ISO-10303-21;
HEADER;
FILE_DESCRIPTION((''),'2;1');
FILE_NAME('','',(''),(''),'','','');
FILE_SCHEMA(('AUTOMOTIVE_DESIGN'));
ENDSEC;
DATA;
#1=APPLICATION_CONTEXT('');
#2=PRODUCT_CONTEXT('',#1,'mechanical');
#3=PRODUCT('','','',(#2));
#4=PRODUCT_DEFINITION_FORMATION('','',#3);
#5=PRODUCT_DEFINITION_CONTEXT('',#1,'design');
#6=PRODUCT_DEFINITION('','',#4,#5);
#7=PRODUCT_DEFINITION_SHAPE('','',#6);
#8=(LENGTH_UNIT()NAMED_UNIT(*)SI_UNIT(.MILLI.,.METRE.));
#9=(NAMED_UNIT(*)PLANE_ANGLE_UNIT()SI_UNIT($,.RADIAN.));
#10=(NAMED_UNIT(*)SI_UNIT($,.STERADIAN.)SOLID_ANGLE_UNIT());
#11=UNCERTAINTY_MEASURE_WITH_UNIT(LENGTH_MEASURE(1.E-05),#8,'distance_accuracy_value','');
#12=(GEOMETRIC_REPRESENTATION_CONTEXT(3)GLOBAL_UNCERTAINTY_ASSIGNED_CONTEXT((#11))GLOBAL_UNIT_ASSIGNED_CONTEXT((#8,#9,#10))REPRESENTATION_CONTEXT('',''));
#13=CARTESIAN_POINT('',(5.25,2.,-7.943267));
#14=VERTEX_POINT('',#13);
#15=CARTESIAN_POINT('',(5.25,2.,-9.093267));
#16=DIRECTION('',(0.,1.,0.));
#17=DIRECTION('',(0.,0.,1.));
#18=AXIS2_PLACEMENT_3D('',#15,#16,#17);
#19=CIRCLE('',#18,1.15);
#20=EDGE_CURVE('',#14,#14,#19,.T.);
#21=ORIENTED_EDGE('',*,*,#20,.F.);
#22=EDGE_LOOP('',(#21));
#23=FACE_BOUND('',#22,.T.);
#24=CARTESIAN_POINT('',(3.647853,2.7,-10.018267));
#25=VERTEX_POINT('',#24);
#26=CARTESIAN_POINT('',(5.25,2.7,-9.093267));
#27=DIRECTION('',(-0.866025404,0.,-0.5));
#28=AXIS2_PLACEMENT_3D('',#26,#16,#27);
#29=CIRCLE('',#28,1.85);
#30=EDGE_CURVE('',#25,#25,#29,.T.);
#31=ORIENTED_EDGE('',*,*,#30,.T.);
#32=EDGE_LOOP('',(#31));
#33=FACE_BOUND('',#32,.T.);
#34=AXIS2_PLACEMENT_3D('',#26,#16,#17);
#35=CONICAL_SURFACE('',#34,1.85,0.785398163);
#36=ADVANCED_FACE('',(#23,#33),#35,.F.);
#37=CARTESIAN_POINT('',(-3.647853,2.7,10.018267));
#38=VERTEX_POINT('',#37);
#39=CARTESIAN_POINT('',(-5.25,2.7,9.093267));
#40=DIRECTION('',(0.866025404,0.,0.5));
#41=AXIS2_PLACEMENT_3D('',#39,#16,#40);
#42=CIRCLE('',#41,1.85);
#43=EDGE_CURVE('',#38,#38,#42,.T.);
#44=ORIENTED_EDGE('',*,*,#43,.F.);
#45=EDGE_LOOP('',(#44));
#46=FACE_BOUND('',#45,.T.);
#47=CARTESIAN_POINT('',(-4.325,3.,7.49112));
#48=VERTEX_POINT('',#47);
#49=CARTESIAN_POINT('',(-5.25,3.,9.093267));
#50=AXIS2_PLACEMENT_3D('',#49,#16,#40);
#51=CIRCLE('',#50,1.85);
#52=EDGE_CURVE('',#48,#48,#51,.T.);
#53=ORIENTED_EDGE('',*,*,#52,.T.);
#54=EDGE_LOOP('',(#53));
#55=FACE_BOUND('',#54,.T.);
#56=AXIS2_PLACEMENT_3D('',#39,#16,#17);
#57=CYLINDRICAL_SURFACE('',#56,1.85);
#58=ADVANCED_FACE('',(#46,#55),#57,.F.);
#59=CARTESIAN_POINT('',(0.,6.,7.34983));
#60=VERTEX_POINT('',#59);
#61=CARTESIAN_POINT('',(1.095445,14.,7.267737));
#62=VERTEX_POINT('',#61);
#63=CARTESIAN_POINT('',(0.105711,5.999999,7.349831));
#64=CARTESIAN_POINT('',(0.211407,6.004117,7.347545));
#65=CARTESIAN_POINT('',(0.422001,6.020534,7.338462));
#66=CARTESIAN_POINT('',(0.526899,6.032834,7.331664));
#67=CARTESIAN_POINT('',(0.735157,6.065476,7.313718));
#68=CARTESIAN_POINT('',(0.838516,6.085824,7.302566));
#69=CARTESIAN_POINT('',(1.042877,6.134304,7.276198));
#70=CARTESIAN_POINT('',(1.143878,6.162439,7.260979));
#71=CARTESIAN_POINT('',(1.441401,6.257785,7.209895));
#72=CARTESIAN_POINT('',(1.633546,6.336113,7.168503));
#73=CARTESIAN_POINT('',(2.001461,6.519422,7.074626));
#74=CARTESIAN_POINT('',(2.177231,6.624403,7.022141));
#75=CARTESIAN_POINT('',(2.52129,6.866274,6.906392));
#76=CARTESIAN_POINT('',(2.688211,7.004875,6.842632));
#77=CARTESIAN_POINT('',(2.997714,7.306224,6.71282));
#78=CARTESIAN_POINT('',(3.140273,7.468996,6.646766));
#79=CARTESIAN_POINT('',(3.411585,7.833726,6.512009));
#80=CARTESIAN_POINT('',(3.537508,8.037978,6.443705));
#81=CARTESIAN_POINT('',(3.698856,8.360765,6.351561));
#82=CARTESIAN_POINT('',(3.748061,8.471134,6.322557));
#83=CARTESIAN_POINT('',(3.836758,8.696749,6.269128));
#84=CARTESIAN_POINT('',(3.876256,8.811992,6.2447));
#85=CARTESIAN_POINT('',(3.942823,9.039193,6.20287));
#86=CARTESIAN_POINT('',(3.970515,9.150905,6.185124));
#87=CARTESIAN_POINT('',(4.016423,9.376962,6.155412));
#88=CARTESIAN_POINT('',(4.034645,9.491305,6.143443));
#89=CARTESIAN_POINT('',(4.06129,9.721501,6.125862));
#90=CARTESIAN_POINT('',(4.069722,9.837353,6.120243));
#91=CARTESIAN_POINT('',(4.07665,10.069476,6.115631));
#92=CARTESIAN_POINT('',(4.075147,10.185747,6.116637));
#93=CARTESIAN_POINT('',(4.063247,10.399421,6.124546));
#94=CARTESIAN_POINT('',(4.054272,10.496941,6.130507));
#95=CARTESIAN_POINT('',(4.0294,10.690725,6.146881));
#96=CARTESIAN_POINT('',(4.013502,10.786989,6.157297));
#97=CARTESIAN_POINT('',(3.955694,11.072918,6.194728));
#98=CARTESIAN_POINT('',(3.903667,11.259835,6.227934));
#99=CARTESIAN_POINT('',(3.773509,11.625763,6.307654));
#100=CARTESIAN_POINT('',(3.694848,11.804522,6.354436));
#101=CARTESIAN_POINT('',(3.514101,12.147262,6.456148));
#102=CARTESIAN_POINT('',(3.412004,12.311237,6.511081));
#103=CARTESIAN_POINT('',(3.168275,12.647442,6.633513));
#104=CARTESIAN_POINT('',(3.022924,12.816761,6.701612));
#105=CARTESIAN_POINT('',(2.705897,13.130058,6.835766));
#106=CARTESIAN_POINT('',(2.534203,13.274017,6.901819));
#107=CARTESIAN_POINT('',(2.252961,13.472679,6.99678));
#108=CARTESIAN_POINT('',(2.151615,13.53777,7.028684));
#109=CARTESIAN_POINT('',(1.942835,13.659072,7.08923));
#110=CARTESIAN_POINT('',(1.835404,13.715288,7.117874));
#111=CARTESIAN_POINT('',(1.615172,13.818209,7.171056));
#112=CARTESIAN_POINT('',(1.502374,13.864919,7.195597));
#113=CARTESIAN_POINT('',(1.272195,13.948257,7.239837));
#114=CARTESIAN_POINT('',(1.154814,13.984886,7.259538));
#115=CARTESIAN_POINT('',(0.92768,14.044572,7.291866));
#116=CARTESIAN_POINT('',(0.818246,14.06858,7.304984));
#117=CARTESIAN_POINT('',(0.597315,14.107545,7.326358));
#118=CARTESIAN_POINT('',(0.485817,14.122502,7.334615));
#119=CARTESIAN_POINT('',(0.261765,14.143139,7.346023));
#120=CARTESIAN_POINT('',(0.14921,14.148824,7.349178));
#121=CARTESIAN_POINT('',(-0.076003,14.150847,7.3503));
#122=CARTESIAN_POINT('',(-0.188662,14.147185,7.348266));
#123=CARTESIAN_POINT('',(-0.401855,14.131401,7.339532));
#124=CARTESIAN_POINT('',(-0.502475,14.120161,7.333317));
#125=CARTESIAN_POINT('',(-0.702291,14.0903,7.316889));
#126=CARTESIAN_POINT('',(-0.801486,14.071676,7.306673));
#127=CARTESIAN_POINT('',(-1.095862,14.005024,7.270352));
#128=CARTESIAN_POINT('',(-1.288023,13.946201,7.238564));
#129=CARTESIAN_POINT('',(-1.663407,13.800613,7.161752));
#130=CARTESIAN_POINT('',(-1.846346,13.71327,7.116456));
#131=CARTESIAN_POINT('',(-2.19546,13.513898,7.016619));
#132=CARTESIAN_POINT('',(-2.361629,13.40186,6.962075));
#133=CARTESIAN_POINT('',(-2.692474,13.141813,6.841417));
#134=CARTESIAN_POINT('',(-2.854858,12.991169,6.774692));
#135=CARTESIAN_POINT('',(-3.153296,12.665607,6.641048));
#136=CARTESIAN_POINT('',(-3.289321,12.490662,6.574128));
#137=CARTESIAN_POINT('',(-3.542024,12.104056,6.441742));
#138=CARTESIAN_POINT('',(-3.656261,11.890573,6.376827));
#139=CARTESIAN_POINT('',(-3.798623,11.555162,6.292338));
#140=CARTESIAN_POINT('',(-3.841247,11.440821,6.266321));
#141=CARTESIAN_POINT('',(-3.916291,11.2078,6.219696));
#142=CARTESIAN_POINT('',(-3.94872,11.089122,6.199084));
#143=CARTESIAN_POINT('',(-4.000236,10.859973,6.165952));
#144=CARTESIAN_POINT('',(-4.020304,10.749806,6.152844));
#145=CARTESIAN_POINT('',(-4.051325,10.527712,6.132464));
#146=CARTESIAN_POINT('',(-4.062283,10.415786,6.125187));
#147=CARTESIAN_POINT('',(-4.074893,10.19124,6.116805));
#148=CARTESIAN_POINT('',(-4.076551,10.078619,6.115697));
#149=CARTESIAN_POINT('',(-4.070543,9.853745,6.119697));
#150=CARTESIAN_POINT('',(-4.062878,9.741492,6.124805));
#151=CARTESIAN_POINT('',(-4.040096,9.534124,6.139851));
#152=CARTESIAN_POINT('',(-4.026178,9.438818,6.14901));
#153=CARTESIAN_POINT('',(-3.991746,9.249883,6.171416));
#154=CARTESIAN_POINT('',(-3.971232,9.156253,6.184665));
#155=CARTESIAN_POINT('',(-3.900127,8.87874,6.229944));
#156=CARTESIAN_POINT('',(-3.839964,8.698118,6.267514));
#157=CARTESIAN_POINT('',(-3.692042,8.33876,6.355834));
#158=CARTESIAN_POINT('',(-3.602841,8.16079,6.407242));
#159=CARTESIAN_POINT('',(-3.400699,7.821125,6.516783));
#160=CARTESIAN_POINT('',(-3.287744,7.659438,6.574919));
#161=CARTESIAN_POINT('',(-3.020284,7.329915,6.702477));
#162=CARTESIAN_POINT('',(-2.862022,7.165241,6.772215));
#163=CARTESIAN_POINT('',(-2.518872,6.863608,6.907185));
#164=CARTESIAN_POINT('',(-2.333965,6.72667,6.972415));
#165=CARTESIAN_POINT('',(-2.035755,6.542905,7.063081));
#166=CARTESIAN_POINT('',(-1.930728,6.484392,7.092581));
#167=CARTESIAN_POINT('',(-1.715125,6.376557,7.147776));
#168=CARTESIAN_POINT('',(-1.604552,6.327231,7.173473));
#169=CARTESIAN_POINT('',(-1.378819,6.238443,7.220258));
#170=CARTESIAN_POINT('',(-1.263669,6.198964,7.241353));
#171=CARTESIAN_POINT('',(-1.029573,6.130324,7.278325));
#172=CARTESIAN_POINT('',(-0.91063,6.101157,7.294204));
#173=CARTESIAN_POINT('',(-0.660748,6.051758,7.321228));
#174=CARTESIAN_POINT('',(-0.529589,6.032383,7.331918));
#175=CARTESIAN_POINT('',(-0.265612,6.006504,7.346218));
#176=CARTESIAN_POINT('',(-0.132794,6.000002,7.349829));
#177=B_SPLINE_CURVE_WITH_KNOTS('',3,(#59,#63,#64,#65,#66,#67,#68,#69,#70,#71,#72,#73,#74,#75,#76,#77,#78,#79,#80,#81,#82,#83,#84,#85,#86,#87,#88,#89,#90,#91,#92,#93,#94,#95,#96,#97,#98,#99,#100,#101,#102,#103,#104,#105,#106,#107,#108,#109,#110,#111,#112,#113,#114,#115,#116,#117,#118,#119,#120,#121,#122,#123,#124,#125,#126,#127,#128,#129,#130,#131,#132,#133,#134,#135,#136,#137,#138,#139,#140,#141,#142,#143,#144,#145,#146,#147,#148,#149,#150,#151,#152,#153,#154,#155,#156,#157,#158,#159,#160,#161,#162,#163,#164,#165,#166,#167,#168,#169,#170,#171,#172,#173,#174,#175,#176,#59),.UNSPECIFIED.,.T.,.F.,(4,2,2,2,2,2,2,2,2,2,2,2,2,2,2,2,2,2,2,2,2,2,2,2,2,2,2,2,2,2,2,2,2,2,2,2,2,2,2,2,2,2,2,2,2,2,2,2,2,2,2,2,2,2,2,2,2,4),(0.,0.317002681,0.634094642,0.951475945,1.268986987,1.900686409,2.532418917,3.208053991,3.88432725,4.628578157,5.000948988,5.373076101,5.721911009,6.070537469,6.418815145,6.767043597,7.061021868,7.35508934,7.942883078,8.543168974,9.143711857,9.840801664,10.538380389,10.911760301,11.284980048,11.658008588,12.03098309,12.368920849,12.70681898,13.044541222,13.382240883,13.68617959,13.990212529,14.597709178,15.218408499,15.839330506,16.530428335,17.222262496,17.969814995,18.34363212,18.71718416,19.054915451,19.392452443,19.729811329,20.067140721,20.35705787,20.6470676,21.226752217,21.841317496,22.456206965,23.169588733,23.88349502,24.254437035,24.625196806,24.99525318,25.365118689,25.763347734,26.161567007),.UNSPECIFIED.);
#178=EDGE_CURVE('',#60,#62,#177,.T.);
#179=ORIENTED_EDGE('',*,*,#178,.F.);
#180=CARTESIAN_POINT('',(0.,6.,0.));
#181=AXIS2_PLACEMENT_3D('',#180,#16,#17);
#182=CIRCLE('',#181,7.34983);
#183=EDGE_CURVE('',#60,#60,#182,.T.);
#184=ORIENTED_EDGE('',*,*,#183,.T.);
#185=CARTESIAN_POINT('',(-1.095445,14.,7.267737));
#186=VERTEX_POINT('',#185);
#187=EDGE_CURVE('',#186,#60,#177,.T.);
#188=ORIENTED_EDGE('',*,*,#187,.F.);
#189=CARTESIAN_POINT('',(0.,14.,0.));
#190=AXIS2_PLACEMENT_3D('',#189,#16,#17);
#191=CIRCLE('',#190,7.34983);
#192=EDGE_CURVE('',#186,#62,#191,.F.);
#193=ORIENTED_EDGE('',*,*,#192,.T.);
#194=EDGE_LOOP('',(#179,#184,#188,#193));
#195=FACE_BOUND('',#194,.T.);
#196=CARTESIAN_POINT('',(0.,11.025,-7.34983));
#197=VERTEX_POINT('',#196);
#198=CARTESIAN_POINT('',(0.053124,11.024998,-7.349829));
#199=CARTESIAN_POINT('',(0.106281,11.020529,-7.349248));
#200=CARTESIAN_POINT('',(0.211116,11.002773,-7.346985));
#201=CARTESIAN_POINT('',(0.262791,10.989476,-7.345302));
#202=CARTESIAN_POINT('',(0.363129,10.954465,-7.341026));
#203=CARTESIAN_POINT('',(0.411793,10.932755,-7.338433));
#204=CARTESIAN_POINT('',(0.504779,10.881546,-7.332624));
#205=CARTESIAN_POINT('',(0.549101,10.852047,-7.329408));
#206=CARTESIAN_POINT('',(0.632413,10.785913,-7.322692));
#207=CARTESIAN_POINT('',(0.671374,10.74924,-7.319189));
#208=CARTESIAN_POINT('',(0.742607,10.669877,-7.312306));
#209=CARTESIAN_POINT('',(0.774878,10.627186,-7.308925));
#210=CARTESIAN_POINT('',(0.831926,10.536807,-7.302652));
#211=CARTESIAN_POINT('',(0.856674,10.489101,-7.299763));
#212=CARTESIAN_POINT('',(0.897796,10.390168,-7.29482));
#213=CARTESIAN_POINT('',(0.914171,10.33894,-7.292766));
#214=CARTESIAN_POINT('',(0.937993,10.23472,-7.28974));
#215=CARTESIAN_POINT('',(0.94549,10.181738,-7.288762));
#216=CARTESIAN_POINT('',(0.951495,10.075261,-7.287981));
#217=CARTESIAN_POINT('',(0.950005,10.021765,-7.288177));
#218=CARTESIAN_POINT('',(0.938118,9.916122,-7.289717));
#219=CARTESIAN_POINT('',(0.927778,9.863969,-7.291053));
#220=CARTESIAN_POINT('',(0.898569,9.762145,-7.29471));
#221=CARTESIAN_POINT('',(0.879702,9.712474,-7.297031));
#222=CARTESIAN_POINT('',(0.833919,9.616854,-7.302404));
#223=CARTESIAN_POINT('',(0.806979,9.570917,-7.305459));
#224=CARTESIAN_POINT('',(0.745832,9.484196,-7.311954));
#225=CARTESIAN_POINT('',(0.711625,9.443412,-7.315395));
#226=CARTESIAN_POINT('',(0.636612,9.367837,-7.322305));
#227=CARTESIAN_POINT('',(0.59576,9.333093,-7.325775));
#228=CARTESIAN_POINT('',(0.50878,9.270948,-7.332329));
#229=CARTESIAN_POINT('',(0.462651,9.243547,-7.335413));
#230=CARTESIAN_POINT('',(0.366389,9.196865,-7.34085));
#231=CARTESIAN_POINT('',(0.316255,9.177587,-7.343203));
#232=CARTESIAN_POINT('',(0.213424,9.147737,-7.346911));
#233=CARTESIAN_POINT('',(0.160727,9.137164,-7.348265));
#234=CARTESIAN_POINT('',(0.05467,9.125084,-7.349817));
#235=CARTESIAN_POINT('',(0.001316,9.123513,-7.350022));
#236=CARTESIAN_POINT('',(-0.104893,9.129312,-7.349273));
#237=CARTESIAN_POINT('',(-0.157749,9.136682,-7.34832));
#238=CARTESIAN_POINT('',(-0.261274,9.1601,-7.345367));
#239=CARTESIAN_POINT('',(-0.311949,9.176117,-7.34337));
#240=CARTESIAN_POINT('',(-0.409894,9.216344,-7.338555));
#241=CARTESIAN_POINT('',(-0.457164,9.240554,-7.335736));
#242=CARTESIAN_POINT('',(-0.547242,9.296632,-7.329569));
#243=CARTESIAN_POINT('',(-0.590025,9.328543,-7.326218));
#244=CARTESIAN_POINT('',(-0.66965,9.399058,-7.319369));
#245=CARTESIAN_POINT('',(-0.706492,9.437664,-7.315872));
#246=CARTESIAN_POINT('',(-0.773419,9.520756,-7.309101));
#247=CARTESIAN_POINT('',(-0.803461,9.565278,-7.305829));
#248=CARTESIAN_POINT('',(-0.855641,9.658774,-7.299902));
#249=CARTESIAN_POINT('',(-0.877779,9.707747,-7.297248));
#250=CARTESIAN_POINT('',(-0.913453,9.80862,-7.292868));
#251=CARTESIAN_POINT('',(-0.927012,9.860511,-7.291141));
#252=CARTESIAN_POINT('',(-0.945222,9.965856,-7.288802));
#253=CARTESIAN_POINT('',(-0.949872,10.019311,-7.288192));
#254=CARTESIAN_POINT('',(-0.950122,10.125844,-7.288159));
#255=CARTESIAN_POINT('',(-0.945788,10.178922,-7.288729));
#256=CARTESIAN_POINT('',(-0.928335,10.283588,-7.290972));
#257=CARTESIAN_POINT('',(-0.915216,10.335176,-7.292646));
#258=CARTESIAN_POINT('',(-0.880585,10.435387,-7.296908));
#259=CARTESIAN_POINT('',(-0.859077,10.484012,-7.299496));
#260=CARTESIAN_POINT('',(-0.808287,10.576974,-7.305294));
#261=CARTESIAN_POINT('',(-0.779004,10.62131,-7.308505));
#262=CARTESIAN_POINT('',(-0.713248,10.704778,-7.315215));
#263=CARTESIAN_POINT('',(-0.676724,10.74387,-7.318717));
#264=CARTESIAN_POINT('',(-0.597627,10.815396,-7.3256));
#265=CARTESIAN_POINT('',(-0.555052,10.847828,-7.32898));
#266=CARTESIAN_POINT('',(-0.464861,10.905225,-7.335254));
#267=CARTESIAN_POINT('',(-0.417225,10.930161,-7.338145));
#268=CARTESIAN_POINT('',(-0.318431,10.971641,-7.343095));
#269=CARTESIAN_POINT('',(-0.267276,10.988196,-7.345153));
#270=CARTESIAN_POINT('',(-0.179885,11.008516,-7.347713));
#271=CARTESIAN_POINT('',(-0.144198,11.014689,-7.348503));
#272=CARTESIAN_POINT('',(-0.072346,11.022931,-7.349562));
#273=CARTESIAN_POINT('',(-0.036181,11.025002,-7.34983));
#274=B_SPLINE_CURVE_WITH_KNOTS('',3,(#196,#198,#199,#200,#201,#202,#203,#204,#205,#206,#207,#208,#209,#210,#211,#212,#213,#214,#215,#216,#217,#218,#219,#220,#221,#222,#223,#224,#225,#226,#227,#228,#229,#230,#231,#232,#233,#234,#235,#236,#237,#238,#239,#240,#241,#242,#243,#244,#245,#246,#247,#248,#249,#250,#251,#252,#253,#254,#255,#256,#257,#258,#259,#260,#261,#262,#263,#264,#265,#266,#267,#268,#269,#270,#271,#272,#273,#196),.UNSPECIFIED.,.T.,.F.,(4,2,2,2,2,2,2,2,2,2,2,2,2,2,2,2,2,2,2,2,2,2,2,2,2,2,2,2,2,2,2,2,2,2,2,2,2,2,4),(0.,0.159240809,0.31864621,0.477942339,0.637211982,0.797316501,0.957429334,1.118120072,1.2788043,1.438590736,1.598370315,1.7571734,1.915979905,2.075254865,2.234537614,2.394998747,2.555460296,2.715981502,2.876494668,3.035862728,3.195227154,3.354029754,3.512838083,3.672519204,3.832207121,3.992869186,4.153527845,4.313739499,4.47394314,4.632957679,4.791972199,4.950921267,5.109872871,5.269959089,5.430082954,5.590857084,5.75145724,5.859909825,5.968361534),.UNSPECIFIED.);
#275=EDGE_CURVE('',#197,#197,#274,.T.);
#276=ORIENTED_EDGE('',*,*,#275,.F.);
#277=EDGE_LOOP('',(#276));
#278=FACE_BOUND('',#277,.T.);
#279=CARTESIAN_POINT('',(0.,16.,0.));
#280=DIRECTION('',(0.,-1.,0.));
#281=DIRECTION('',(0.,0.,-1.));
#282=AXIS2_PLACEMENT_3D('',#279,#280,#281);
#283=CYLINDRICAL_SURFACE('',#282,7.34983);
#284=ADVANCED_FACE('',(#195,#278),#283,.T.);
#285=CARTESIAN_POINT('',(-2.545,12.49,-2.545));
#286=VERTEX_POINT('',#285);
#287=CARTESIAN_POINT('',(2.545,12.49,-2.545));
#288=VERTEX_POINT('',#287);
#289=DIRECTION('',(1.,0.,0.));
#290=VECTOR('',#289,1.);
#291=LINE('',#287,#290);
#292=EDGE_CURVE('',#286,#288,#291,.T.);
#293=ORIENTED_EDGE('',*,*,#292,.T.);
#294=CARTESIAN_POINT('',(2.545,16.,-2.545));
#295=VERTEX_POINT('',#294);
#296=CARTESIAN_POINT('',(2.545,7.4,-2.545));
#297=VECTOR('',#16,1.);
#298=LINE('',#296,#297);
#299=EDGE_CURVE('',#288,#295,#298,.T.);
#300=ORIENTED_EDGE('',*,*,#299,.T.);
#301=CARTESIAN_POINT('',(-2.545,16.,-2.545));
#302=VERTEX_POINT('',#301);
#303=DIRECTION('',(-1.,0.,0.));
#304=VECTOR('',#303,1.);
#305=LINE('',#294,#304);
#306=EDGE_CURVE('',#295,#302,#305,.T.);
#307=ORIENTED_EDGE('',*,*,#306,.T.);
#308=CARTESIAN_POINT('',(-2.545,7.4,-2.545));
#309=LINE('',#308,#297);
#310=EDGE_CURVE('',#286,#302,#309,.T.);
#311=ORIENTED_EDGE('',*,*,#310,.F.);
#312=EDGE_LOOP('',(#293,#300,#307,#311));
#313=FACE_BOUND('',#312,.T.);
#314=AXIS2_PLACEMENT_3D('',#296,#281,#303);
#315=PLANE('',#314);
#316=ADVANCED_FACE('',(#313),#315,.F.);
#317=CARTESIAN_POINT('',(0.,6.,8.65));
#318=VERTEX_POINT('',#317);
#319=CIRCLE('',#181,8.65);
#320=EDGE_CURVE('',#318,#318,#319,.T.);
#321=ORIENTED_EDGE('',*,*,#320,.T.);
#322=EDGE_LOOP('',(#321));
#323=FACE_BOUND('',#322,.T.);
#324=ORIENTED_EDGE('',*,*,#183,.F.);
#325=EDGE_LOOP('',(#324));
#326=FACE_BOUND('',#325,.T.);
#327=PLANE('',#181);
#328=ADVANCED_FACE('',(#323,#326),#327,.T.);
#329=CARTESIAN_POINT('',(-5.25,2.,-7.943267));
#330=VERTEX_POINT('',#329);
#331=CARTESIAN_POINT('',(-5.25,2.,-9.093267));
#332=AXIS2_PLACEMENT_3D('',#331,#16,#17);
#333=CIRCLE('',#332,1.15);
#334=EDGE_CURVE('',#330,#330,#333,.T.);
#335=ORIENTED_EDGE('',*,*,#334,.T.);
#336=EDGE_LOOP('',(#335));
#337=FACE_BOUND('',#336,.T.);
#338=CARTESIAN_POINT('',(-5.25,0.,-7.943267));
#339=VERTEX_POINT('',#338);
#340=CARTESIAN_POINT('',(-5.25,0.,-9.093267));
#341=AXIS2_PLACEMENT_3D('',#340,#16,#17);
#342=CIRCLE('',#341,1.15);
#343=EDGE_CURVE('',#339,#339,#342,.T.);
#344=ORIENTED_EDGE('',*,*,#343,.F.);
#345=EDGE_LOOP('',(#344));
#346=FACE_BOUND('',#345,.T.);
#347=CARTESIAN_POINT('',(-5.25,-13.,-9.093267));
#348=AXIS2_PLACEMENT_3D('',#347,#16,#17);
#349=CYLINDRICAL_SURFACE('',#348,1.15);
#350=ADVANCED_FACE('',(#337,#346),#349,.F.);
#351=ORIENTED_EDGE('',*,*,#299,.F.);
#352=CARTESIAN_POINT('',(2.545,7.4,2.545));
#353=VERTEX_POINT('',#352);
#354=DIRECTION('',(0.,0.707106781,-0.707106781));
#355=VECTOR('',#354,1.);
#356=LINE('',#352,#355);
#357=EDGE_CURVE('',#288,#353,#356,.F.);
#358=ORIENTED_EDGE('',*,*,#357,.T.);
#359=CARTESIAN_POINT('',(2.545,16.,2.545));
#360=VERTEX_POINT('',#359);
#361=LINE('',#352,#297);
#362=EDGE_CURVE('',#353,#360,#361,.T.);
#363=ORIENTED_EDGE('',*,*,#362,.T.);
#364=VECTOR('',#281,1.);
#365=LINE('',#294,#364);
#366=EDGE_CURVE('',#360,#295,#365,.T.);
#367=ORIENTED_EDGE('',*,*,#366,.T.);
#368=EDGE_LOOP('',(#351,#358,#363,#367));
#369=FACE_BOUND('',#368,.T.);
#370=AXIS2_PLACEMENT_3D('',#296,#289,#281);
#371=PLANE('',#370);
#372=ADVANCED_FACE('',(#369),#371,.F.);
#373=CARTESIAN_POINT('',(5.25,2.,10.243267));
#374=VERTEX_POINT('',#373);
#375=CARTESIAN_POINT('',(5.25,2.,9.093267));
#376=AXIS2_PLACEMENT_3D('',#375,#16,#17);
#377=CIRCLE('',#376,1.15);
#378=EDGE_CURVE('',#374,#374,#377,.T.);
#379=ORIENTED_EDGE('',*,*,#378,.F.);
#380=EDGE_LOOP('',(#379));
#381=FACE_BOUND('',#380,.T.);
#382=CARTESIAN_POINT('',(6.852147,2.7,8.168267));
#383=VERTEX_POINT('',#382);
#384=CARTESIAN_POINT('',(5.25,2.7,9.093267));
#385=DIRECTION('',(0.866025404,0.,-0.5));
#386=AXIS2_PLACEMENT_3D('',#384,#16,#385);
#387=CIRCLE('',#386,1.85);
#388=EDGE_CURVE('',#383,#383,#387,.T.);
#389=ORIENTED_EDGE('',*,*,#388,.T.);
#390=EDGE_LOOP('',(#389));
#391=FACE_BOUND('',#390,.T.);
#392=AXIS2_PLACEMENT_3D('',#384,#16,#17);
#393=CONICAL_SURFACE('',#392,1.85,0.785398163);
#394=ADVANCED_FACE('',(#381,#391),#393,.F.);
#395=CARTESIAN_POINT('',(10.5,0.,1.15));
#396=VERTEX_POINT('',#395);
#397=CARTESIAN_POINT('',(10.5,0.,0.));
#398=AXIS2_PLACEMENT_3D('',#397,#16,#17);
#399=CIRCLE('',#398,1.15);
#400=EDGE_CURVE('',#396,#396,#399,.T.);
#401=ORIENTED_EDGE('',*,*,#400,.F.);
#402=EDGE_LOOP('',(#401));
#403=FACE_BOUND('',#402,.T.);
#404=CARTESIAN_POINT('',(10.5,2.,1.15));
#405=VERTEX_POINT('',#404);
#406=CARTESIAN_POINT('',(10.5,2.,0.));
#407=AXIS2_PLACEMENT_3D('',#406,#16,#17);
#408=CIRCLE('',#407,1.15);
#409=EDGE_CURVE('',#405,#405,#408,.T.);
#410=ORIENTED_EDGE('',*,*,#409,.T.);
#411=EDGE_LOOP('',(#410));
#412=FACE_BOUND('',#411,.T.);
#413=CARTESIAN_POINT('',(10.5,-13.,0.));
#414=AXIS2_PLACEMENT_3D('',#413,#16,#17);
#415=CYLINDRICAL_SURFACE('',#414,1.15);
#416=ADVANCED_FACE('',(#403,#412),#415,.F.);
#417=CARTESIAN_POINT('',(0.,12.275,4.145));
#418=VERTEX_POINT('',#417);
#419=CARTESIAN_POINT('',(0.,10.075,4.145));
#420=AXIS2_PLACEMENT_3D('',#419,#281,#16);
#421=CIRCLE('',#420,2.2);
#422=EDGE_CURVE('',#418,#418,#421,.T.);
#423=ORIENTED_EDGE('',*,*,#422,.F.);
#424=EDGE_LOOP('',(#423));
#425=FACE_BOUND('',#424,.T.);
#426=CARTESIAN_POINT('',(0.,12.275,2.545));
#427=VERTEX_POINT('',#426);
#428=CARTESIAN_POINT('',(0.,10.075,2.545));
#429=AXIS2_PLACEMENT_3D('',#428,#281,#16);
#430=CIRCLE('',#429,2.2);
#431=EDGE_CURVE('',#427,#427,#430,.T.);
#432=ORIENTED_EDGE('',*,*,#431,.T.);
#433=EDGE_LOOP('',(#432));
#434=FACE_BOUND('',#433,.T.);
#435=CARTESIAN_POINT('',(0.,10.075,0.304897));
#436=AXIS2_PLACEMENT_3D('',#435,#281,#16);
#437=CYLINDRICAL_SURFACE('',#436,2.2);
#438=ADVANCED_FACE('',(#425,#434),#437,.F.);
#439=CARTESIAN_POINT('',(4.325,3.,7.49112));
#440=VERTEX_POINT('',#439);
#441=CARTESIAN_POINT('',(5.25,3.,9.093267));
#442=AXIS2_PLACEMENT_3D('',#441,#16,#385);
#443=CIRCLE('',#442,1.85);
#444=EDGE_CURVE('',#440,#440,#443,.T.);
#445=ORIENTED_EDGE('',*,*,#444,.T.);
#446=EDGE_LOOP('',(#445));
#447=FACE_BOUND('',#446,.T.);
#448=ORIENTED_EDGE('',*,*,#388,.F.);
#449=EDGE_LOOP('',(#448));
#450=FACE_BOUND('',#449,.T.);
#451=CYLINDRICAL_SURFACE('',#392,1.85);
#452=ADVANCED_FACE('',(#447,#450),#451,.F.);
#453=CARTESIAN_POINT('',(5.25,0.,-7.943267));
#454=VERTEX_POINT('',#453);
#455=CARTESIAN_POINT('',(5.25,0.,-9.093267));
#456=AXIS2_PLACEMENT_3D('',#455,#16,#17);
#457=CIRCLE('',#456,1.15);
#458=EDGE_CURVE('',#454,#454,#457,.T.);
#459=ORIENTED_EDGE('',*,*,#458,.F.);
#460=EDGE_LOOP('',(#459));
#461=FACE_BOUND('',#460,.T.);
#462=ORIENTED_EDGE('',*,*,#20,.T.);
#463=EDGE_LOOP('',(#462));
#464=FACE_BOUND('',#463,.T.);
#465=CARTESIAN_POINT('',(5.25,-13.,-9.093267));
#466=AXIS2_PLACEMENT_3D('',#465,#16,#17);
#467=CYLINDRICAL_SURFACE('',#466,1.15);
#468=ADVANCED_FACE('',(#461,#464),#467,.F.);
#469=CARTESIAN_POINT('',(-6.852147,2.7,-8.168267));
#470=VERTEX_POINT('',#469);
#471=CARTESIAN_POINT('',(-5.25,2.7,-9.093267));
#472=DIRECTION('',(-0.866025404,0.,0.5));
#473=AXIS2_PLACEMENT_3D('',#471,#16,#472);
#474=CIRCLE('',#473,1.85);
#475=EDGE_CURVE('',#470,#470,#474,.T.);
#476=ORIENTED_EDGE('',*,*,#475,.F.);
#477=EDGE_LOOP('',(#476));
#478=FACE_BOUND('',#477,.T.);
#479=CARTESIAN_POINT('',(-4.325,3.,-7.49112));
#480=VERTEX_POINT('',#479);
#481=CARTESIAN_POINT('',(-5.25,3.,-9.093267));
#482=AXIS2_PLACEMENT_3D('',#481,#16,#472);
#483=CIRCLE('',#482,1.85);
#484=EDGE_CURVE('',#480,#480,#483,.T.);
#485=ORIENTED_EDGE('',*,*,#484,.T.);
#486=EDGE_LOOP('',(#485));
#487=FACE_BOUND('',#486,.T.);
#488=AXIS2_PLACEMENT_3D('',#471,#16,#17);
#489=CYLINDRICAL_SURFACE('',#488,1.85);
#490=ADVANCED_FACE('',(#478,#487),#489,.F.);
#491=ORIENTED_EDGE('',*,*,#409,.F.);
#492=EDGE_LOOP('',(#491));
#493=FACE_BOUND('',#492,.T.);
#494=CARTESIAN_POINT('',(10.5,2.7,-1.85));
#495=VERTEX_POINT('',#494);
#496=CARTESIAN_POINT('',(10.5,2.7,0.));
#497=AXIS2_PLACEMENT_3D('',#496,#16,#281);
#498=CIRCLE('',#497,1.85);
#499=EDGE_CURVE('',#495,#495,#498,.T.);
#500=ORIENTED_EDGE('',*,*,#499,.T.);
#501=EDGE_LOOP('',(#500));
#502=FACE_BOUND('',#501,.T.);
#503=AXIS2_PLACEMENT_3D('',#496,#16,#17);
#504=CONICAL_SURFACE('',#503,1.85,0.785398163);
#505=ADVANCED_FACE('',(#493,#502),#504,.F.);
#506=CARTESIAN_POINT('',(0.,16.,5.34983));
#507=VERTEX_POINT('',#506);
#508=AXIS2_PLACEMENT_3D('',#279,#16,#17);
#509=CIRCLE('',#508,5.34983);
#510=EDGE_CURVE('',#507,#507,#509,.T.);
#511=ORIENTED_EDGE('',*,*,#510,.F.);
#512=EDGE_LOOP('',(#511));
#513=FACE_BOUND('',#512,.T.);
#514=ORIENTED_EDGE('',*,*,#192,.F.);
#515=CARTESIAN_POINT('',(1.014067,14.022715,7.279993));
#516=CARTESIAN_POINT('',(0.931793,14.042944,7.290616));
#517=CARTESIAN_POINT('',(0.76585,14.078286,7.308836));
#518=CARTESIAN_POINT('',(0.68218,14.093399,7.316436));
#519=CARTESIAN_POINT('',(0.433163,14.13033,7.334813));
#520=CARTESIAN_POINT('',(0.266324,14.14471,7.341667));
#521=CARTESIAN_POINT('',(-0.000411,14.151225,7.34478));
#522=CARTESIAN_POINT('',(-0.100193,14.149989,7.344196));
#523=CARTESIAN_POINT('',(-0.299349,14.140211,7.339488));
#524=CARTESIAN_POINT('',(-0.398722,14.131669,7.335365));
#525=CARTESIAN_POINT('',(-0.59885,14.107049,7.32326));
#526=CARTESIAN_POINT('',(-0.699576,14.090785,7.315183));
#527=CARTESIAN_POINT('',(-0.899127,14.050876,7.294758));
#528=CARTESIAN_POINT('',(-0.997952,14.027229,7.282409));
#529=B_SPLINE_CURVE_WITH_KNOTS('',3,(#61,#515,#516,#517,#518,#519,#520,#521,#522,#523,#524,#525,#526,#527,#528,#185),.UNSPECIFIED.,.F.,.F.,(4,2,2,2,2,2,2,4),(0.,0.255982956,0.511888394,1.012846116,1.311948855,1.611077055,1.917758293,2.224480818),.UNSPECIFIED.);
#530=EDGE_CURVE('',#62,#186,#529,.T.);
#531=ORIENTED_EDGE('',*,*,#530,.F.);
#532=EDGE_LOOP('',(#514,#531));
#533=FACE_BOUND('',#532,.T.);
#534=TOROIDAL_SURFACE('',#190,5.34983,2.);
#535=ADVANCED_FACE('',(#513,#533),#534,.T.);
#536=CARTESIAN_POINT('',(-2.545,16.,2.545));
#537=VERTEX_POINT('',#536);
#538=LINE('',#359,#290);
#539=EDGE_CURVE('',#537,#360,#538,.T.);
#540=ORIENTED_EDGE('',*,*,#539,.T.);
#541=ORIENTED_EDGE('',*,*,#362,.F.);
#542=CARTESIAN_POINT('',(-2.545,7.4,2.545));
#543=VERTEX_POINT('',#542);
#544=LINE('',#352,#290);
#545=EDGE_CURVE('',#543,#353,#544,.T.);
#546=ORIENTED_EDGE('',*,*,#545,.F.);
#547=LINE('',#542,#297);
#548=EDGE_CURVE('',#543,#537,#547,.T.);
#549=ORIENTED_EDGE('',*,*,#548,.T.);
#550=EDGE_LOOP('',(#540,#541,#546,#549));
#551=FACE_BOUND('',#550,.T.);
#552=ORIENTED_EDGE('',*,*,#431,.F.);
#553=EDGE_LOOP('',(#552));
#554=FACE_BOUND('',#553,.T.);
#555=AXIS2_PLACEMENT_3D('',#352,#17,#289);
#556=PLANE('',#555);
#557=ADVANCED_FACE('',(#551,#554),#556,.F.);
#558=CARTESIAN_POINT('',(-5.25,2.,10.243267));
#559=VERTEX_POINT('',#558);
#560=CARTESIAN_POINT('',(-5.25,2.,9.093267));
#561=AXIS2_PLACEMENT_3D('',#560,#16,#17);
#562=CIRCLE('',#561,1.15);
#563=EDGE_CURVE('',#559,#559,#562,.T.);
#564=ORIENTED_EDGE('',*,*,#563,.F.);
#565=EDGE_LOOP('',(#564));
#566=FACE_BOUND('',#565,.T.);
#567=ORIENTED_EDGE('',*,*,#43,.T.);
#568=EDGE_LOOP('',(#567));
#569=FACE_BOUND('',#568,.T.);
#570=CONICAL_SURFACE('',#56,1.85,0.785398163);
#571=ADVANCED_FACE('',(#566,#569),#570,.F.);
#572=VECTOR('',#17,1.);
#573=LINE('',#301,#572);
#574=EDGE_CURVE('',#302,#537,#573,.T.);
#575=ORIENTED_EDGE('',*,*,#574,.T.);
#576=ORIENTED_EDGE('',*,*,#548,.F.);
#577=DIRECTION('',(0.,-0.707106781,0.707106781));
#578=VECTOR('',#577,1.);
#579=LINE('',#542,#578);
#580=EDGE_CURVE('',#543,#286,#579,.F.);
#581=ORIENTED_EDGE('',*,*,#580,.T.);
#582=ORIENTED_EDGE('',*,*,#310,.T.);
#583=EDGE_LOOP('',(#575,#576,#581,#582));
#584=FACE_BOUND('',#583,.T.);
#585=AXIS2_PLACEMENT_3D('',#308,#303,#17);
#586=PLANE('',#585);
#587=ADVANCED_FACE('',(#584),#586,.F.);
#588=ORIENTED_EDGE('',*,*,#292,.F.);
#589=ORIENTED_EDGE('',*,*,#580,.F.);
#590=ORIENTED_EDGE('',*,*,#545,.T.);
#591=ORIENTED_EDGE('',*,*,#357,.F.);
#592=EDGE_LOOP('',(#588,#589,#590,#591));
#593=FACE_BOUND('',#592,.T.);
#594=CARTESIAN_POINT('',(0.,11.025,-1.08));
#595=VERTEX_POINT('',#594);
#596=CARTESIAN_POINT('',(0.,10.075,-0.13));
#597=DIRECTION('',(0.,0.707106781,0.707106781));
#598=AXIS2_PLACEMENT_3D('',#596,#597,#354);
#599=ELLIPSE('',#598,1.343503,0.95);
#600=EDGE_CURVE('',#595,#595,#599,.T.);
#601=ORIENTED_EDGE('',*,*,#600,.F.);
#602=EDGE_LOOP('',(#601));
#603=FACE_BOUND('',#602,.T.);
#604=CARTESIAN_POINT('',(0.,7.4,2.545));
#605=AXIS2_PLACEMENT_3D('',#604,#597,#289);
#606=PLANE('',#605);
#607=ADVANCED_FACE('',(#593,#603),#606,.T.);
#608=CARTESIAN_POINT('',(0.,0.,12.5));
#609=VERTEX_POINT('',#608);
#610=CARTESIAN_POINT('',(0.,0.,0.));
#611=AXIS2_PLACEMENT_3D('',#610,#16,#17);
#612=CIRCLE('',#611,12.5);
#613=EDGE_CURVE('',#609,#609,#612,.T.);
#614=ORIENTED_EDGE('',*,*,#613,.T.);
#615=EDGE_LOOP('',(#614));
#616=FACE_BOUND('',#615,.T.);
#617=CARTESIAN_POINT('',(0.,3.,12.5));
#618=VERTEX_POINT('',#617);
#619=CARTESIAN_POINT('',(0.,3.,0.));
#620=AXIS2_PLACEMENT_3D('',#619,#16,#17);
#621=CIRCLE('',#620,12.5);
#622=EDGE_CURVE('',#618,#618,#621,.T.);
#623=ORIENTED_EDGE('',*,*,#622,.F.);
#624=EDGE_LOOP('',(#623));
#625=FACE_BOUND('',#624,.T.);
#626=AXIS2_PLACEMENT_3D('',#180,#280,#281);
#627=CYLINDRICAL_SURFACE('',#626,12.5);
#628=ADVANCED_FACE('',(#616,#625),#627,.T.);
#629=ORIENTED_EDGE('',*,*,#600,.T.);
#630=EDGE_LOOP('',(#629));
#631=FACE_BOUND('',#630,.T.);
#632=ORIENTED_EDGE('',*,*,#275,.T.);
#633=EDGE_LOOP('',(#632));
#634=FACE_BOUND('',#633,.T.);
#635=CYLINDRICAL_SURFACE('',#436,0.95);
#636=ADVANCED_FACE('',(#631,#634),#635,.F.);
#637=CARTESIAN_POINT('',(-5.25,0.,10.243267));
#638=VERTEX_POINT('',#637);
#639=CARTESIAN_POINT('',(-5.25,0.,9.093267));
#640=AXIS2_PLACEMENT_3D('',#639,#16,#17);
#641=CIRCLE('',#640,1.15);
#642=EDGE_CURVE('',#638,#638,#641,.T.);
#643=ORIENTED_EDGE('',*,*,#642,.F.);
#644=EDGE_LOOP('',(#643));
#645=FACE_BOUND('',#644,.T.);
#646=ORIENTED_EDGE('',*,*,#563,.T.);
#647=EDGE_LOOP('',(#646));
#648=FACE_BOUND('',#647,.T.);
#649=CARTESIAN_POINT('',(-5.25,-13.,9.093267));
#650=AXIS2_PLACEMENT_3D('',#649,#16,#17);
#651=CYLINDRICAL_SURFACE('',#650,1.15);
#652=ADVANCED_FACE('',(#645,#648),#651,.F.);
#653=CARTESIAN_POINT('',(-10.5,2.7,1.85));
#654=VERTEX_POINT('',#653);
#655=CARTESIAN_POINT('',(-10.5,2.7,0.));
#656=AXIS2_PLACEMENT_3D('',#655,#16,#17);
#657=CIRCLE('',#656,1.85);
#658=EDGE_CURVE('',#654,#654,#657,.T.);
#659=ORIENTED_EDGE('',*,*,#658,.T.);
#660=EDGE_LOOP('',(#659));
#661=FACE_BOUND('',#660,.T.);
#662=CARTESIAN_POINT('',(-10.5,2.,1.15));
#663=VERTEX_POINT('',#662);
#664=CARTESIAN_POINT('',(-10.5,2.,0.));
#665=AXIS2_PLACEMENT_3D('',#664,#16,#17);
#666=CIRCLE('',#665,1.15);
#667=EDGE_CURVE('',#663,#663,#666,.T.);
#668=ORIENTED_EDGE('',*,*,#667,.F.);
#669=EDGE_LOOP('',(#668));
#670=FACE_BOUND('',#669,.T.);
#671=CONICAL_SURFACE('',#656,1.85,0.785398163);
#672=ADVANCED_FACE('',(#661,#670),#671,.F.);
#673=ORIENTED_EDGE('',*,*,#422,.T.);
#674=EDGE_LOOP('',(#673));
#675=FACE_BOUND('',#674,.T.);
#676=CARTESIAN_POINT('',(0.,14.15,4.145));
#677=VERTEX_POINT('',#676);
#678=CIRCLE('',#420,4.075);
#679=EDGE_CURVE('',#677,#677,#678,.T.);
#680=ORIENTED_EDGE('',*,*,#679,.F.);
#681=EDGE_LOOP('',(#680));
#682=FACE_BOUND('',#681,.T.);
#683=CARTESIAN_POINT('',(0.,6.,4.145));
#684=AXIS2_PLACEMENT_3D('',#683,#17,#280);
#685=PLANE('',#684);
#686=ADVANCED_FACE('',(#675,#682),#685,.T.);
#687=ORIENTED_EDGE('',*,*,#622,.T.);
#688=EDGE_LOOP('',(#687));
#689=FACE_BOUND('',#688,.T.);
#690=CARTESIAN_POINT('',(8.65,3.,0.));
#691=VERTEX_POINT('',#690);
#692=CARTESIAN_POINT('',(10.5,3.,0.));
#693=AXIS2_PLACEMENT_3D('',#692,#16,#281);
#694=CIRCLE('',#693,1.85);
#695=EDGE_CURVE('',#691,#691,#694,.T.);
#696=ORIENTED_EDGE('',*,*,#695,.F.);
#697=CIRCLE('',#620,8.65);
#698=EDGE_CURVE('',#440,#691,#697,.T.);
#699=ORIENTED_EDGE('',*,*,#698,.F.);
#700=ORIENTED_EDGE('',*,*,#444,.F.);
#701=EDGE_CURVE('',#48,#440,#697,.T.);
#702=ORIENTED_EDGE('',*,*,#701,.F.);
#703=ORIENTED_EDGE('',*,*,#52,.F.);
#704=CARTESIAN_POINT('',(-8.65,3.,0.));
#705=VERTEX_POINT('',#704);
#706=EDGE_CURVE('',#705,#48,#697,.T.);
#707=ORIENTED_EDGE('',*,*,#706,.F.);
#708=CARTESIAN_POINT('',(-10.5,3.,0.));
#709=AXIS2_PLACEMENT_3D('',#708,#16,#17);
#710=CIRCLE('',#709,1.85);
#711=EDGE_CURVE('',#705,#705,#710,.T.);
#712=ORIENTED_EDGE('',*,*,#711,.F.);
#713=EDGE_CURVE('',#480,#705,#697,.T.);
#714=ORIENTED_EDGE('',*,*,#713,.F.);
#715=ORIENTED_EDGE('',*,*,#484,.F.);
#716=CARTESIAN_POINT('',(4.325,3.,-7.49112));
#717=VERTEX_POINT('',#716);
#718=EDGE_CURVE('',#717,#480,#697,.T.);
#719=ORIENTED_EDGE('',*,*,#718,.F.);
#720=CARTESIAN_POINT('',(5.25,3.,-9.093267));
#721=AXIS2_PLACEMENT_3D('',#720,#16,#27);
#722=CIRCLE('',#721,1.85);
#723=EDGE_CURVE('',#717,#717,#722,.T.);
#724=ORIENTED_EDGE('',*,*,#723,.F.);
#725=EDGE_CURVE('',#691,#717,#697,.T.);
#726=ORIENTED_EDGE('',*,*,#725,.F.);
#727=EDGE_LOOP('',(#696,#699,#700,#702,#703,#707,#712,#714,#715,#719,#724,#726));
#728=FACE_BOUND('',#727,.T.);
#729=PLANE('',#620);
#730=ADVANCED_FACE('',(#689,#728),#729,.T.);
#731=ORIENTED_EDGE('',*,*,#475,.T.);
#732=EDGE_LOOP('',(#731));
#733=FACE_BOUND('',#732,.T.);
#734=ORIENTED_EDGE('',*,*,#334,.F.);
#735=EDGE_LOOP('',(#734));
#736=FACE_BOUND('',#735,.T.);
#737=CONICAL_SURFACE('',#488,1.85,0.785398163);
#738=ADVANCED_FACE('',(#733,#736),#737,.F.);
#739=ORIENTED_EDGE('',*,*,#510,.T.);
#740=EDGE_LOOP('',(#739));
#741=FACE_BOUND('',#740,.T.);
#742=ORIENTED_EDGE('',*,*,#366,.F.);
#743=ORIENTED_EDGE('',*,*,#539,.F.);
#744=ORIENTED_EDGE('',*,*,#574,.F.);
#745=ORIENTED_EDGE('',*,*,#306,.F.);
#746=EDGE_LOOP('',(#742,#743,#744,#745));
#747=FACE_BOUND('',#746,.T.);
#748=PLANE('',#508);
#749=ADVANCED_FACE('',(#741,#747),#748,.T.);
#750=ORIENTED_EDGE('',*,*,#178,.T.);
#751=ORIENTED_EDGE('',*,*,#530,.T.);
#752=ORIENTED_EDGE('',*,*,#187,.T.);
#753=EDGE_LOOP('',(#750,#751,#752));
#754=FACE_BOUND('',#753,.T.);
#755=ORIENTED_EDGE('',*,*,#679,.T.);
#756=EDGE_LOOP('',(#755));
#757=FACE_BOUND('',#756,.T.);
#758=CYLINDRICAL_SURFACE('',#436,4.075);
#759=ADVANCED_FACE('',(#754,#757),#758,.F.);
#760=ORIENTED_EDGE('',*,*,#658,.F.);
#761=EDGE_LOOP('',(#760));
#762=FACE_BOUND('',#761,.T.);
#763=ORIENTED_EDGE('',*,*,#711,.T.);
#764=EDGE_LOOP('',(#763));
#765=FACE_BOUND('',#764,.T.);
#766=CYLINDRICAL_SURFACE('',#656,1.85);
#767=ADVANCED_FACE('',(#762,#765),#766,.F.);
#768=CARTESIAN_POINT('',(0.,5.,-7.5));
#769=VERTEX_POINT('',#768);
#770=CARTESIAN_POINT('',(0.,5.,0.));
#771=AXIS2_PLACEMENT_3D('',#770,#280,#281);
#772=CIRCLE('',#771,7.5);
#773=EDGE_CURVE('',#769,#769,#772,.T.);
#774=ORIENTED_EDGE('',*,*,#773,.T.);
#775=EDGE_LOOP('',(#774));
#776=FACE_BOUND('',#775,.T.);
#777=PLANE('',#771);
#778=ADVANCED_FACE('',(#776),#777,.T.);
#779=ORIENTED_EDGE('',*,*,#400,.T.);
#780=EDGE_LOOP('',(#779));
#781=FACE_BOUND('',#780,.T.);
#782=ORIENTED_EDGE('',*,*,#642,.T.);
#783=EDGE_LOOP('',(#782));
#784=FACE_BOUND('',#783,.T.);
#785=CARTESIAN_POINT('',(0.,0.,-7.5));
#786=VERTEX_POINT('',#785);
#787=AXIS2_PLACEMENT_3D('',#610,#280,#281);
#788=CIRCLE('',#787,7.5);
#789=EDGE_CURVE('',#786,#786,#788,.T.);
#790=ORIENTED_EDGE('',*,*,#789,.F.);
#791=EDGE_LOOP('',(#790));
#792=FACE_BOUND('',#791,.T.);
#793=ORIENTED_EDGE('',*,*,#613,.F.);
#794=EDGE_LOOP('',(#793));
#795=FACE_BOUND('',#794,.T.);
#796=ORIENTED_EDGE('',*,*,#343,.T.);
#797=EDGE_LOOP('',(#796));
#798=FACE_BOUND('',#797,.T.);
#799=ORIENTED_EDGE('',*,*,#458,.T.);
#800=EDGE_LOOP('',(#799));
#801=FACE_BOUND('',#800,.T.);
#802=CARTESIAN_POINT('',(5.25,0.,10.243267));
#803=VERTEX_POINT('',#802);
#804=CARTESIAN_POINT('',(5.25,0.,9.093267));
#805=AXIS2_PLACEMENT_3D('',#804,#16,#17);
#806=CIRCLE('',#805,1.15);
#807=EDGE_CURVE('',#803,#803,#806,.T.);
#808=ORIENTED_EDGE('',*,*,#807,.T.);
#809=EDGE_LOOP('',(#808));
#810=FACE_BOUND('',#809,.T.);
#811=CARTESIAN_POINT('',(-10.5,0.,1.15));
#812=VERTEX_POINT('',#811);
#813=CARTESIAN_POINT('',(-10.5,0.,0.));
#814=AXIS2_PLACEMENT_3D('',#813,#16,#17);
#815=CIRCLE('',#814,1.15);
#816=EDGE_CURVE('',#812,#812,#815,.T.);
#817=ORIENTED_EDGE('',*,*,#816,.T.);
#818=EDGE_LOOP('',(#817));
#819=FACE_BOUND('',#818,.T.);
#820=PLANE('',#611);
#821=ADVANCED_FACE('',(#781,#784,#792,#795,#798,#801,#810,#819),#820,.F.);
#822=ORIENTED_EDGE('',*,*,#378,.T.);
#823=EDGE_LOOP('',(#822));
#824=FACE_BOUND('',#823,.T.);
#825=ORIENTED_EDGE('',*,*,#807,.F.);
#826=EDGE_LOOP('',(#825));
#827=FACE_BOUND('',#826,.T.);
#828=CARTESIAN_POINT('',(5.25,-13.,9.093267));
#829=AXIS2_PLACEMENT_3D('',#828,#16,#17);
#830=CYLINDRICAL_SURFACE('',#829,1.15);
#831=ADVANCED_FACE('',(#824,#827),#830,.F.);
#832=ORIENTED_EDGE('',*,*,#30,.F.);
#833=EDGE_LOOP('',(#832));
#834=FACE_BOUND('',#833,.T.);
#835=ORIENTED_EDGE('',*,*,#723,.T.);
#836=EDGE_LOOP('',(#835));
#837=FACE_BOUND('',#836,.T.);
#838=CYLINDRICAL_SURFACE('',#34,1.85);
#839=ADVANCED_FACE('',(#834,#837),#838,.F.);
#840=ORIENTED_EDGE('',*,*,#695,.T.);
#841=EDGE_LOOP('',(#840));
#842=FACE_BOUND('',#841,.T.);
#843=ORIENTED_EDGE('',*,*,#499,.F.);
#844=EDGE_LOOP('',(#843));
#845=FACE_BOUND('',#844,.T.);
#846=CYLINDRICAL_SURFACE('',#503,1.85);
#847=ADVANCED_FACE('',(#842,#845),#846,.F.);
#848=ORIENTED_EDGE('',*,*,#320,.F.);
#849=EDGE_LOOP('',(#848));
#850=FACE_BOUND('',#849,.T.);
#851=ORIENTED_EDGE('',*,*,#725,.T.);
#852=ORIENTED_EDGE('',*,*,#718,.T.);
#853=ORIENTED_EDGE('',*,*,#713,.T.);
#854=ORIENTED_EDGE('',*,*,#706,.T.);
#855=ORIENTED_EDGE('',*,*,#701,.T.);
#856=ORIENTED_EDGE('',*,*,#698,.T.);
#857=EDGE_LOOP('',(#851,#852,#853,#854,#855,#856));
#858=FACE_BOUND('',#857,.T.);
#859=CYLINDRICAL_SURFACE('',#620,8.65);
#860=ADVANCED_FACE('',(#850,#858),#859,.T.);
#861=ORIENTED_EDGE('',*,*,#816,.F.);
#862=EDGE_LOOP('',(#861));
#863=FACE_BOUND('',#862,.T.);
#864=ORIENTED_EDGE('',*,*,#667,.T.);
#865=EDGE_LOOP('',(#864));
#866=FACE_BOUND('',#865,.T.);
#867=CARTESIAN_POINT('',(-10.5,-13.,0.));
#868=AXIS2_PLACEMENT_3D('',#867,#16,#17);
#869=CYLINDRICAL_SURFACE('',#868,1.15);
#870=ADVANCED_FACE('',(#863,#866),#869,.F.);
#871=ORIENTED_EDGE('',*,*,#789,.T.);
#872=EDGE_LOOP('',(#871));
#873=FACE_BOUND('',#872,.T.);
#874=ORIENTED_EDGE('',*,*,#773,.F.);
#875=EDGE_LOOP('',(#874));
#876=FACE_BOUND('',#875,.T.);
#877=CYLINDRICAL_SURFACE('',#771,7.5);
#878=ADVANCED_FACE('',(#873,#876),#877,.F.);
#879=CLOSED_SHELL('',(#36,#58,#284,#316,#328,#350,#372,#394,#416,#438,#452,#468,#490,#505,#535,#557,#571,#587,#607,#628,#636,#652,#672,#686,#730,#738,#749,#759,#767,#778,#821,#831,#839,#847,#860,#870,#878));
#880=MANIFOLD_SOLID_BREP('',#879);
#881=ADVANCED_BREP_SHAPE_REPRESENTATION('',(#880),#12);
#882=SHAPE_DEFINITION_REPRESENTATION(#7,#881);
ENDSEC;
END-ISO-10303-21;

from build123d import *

# Parameters (mm, degrees)
SKETCH_1_R               = 12.5
EXTRUDE_1_DEPTH          = 6
SKETCH_4_R               = 1.15
CUT_EXTRUDE_2_DEPTH      = 19
SKETCH_3_R               = 7.5
CUT_EXTRUDE_3_DEPTH      = 5
CHAMFER_2_SIZE           = 0.7
SKETCH_8_R               = 17.454292773
SKETCH_8_R_2             = 8.65
CUT_EXTRUDE_4_DEPTH      = 3
PATTERN_CIRCULAR_2_COUNT = 6
SKETCH_2_R               = 7.34982993
EXTRUDE_2_DEPTH          = 10
SKETCH_9_R               = 1.85
CUT_EXTRUDE_5_DEPTH      = 0.3
CHAMFER_3_SIZE           = 0.7
PATTERN_CIRCULAR_3_COUNT = 6
CHAMFER_4_SIZE           = 0.7
SKETCH_10_W              = 5.09
SKETCH_10_H              = 5.09
CUT_EXTRUDE_6_DEPTH      = 8.6
FILLET_1_R               = 2
CHAMFER_5_SIZE           = 5.09


# Some blends are built 0.0001 mm under size
with BuildPart() as part:
    # 草图1 → 凸台-拉伸1 (new body)
    with BuildSketch(Plane(origin=(0, 0, 0), x_dir=(1, 0, 0), z_dir=(0, 1, 0))):
        with Locations(Location((0, 0, 0), (0, 0, 270))):
            Circle(SKETCH_1_R)
    extrude(amount=EXTRUDE_1_DEPTH)

    # 草图4 → 切除-拉伸2 (cut)
    with BuildSketch(Plane(origin=(0, 6, 0), x_dir=(1, 0, 0), z_dir=(0, 1, 0))):
        with Locations(Location((-10.5, 0, 0), (0, 0, 270))):
            Circle(SKETCH_4_R)
    cut_extrude_2 = extrude(amount=-CUT_EXTRUDE_2_DEPTH, mode=Mode.SUBTRACT)

    # 草图3 → 切除-拉伸3 (cut)
    with BuildSketch(Plane(origin=(0, 0, 0), x_dir=(-1, 0, 0), z_dir=(0, -1, 0))):
        with Locations(Location((0, 0, 0), (0, 0, 90))):
            Circle(SKETCH_3_R)
    extrude(amount=-CUT_EXTRUDE_3_DEPTH, mode=Mode.SUBTRACT)

    # 倒角2
    chamfer_2_edges = [part.edges().sort_by_distance(p)[0] for p in [
        (-10.5, 6, -1.15),
    ]]
    chamfer(chamfer_2_edges, length=CHAMFER_2_SIZE)

    # 草图8 → 切除-拉伸4 (cut)
    with BuildSketch(Plane(origin=(0, 6, 0), x_dir=(1, 0, 0), z_dir=(0, 1, 0))):
        Circle(SKETCH_8_R)
        with Locations(Location((0, 0, 0), (0, 0, 270))):
            Circle(SKETCH_8_R_2, mode=Mode.SUBTRACT)
    extrude(amount=-CUT_EXTRUDE_4_DEPTH, mode=Mode.SUBTRACT)

    # 阵列(圆周)2: 切除-拉伸2 ×6 about axis
    pattern_circular_2_axis = Axis((0, 0, 0), (0, 1, 0))
    for i in range(1, PATTERN_CIRCULAR_2_COUNT):
        add(cut_extrude_2.rotate(pattern_circular_2_axis, i * 360 / PATTERN_CIRCULAR_2_COUNT), mode=Mode.SUBTRACT)

    # 草图2 → 凸台-拉伸2 (add)
    with BuildSketch(Plane(origin=(0, 6, 0), x_dir=(1, 0, 0), z_dir=(0, 1, 0))):
        with Locations(Location((0, 0, 0), (0, 0, 270))):
            Circle(SKETCH_2_R)
    extrude(amount=EXTRUDE_2_DEPTH)

    # 草图9 → 切除-拉伸5 (cut)
    with BuildSketch(Plane(origin=(0, 3, 0), x_dir=(1, 0, 0), z_dir=(0, 1, 0))):
        with Locations(Location((-10.5, 0, 0), (0, 0, 270))):
            Circle(SKETCH_9_R)
    cut_extrude_5 = extrude(amount=-CUT_EXTRUDE_5_DEPTH, mode=Mode.SUBTRACT)

    # 倒角3
    chamfer_3_edges = [part.edges().sort_by_distance(p)[0] for p in [
        (-10.5, 2.7, -1.15),
    ]]
    chamfer(chamfer_3_edges, length=CHAMFER_3_SIZE - 0.0001)  # a hair under: the kernel refuses the full size

    # 阵列(圆周)3: 切除-拉伸5 ×6 about axis
    pattern_circular_3_axis = Axis((0, 0, 0), (0, 1, 0))
    for i in range(1, PATTERN_CIRCULAR_3_COUNT):
        add(cut_extrude_5.rotate(pattern_circular_3_axis, i * 360 / PATTERN_CIRCULAR_3_COUNT), mode=Mode.SUBTRACT)

    # 倒角4
    chamfer_4_edges = [part.edges().sort_by_distance(p)[0] for p in [
        (-4.254070786, 2.7, -9.66826674),
        (6.245929214, 2.7, -8.51826674),
        (10.5, 2.7, 1.15),
        (4.254070786, 2.7, 9.66826674),
        (-6.245929214, 2.7, 8.51826674),
    ]]
    chamfer(chamfer_4_edges, length=CHAMFER_4_SIZE - 0.0001)  # a hair under: the kernel refuses the full size

    # 草图10 → 切除-拉伸6 (cut)
    with BuildSketch(Plane(origin=(0, 16, 0), x_dir=(1, 0, 0), z_dir=(0, 1, 0))):
        Rectangle(SKETCH_10_W, SKETCH_10_H)
    extrude(amount=-CUT_EXTRUDE_6_DEPTH, mode=Mode.SUBTRACT)

    # 草图11 → 切除-旋转1 (revolve, cut)
    with BuildSketch(Plane(origin=(0, 0, 0), x_dir=(0, 0, -1), z_dir=(1, 0, 0)), mode=Mode.PRIVATE) as cut_revolve_1_sk:
        Polygon((-0.304897272, 10.075), (-10.874100718, 10.075), (-10.874100718, 6), (-4.145, 6), (-4.145, 7.875), (-2.545, 7.875), (-2.545, 9.125), (11.125701635, 9.125), (11.125701635, 10.075), align=None)
    revolve(cut_revolve_1_sk.sketch.rotate(Axis((0, 10.075, 0.304897272), (0, 0, 1)), 180), axis=Axis((0, 10.075, 0.304897272), (0, 0, 1)), mode=Mode.SUBTRACT)

    # 圆角1
    # the kernel refuses this fillet: 2 mm, written as the material it takes off along each edge
    with BuildSketch(Plane(origin=(0, 16, 0), x_dir=(0, 0, 1), z_dir=(-1, 0, 0))) as fillet_1_piece_1:
        with BuildLine():
            CenterArc((7.34982993 - FILLET_1_R, -FILLET_1_R), FILLET_1_R, 0, 90)
            Line((7.34982993 - FILLET_1_R, 0), (7.34982993, 0))
            Line((7.34982993, 0), (7.34982993, -FILLET_1_R))
        make_face()
    revolve(axis=Axis((0, 16, 0), (0, 1, 0)), mode=Mode.SUBTRACT)

    # 倒角5
    # the kernel refuses this chamfer: 5.09 mm, written as the material it adds along each edge
    with BuildSketch(Plane(origin=(2.545, 7.4, -2.545), x_dir=(0, 0.9996219169112968, -0.027495876610586393), z_dir=(-1, 0, 0))) as chamfer_5_piece_1_section:
        Polygon((CHAMFER_5_SIZE * 0.999621916911, -CHAMFER_5_SIZE * 0.0274958766106), (-CHAMFER_5_SIZE * 0.0274958766106, -CHAMFER_5_SIZE * 0.999621916911), (0, 0), align=None)
    chamfer_5_piece_1 = extrude(amount=5.09, mode=Mode.PRIVATE)
    chamfer_5_piece_1 = chamfer_5_piece_1 - Plane(origin=(0, 10.075, -0.813981716), x_dir=(0, 1, 0), z_dir=(0, 0, -1)) * Cylinder(0.95, 31, mode=Mode.PRIVATE)
    add(chamfer_5_piece_1)


solid = part.part
